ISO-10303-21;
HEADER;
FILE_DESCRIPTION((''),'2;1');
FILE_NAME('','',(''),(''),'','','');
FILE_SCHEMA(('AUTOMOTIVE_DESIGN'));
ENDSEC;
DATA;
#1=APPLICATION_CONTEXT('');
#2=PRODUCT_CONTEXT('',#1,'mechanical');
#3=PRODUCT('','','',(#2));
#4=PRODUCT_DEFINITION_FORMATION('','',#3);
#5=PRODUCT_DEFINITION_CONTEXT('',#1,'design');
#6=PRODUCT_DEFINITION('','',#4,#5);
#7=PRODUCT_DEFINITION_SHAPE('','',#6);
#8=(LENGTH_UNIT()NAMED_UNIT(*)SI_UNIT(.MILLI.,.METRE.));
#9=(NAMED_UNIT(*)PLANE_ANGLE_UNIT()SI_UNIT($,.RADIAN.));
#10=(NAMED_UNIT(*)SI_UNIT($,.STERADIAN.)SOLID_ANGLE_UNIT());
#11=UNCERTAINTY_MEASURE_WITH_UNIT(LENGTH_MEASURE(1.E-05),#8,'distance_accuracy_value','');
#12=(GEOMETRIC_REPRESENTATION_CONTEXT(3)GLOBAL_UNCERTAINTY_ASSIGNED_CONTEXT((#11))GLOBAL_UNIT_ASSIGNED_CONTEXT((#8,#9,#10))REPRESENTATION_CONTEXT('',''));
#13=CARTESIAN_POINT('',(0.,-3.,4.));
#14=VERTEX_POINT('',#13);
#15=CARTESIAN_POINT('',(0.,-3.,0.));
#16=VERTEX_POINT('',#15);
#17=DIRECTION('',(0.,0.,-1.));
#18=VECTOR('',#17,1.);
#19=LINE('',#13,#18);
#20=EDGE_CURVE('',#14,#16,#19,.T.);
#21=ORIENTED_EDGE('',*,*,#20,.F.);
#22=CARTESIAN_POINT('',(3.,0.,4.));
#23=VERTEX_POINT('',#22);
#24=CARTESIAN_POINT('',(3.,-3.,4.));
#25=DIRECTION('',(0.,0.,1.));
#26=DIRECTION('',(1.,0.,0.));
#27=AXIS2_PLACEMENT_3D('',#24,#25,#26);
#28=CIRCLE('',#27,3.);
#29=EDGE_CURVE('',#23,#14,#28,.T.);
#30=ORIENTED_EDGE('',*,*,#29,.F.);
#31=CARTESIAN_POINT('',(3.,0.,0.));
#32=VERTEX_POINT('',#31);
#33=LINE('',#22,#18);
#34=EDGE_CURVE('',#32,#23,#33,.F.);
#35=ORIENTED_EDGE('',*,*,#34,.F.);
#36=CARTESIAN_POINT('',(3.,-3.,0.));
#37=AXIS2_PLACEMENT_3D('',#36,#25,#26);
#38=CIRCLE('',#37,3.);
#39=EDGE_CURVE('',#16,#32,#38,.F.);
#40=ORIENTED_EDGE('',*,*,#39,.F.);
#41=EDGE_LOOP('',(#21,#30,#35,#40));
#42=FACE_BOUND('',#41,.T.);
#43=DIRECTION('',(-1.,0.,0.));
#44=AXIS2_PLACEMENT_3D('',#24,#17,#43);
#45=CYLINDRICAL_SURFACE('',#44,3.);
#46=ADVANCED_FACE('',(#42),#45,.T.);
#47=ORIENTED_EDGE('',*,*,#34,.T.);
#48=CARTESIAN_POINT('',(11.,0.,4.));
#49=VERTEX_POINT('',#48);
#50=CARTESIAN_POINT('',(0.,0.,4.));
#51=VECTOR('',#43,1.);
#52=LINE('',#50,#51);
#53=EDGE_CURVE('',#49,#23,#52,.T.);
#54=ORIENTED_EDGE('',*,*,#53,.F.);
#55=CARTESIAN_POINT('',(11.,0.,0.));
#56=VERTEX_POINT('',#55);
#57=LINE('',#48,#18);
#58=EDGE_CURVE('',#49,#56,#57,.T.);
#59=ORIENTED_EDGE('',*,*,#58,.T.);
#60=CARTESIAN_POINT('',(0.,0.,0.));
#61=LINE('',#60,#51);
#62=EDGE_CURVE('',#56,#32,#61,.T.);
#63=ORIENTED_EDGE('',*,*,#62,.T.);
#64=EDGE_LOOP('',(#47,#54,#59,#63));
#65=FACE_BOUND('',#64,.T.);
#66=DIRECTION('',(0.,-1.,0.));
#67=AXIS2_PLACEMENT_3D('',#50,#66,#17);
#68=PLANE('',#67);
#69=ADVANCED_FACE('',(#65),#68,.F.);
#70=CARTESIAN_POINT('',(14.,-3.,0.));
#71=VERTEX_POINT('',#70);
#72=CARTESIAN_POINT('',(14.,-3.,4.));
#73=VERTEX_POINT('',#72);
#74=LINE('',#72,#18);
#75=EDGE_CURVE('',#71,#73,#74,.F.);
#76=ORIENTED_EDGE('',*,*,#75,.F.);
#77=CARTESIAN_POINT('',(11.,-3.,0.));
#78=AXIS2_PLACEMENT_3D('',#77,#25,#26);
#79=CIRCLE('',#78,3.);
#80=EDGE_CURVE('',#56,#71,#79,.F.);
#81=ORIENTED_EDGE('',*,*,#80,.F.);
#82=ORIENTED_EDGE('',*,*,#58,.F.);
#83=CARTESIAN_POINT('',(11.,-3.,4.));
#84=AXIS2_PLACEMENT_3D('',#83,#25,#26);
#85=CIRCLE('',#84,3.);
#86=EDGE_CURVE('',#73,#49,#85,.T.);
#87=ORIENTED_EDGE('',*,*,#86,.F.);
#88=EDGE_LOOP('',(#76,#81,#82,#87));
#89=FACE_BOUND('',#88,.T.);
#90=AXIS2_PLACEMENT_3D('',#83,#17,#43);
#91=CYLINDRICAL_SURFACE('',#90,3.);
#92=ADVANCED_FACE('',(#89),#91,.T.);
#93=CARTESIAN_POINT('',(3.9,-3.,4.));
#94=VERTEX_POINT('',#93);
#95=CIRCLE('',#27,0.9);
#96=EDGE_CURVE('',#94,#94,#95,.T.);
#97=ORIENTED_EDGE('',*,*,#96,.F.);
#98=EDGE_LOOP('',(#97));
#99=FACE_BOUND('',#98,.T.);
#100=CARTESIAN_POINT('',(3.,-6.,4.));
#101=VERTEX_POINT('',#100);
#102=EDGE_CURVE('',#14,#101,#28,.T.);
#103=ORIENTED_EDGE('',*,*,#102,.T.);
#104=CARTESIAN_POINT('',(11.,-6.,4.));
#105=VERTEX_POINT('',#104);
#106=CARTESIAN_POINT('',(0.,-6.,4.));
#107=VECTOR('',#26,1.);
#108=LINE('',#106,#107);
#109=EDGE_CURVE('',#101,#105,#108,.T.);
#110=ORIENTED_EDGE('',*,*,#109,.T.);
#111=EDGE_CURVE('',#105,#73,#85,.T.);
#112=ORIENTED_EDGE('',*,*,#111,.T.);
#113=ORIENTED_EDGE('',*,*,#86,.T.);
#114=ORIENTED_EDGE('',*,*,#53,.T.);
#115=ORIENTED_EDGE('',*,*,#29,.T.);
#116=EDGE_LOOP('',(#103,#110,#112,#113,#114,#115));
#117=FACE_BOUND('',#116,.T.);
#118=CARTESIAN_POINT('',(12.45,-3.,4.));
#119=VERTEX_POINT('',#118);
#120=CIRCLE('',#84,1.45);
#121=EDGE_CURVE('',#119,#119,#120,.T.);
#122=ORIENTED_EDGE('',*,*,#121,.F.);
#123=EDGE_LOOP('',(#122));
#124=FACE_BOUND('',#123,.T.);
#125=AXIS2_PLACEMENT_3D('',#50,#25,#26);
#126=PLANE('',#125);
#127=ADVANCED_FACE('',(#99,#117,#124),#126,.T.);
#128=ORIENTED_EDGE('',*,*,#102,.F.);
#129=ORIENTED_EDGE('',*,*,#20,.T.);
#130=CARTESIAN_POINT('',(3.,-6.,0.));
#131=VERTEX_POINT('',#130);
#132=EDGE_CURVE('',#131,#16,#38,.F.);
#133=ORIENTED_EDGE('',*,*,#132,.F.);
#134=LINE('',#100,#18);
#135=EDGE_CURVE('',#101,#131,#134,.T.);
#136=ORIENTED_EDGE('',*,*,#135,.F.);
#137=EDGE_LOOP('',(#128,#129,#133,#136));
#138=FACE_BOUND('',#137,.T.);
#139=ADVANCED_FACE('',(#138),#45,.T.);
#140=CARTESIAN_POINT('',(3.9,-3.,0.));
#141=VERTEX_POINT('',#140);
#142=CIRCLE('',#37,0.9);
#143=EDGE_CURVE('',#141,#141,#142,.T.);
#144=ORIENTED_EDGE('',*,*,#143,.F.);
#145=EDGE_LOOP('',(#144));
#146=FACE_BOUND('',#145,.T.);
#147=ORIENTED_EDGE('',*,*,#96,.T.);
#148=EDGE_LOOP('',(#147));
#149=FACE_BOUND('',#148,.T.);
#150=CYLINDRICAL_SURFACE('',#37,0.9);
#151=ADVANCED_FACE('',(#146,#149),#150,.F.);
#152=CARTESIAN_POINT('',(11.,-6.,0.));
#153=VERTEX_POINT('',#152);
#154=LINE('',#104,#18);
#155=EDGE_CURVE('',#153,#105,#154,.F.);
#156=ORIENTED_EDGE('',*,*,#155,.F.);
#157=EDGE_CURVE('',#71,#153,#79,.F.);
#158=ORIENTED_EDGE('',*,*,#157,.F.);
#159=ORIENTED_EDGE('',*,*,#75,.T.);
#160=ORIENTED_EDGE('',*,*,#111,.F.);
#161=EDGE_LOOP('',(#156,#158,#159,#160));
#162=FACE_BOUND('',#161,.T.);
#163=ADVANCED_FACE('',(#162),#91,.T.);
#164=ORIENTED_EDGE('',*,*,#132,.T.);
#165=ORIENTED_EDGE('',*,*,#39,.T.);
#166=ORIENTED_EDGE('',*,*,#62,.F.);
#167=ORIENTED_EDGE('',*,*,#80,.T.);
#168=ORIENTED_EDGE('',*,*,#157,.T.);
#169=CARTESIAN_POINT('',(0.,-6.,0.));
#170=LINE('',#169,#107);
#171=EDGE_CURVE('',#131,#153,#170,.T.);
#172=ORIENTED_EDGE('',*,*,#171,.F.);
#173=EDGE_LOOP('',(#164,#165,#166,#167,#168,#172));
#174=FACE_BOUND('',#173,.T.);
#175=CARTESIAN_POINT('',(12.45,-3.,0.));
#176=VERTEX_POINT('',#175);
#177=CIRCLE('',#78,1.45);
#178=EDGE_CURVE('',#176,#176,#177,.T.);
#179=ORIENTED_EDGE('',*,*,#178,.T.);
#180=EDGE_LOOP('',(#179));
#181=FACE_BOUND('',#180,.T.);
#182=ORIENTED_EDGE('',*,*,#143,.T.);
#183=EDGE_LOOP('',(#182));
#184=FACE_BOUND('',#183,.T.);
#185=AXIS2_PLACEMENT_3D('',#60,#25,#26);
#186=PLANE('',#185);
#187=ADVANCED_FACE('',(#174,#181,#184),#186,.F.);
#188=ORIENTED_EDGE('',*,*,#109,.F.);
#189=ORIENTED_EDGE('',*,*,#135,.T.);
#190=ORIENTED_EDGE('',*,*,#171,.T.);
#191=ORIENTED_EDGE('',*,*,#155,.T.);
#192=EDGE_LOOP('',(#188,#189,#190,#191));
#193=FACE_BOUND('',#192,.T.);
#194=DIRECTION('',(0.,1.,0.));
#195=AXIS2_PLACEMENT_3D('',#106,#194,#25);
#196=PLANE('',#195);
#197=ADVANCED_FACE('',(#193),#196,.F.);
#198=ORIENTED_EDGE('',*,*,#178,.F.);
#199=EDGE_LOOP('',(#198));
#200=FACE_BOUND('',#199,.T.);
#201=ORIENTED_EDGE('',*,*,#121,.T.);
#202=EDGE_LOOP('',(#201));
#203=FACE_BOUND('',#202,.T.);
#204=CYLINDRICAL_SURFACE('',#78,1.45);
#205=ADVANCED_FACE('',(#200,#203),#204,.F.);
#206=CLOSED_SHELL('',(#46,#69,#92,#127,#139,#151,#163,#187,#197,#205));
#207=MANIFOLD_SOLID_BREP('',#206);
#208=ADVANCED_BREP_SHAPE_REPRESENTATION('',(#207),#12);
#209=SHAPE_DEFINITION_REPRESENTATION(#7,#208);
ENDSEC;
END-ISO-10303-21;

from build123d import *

# Parameters (mm, degrees)
SKETCH1_W               = 14
SKETCH1_H               = 6
BOSS_EXTRUDE1_DEPTH     = 4
CUT_EXTRUDE1_DEPTH      = 16.748015748
CUT_EXTRUDE1_DEPTH_BACK = 16.748015748
SKETCH2_R               = 0.9
SKETCH2_R_2             = 1.45
FILLET1_R               = 3


with BuildPart() as part:
    # Sketch1 → Boss-Extrude1 (new body)
    with BuildSketch(Plane.XY):
        with Locations((7, -3)):
            Rectangle(SKETCH1_W, SKETCH1_H)
    extrude(amount=BOSS_EXTRUDE1_DEPTH)

    # Sketch2 → Cut-Extrude1 (cut, two sides: drawn at the far end of the back side and taken through both)
    with BuildSketch(Plane.XY.offset(4).offset(-CUT_EXTRUDE1_DEPTH_BACK)):
        with Locations((3, -3)):
            Circle(SKETCH2_R)
        with Locations((11, -3)):
            Circle(SKETCH2_R_2)
    extrude(amount=CUT_EXTRUDE1_DEPTH + CUT_EXTRUDE1_DEPTH_BACK, mode=Mode.SUBTRACT)

    # Fillet1
    fillet1_edges = [part.edges().sort_by_distance(p)[0] for p in [
        (14, -6, 2),
        (14, 0, 2),
        (0, -6, 2),
        (0, 0, 2),
    ]]
    fillet(fillet1_edges, radius=FILLET1_R - 0.0001)  # a hair under: the kernel refuses the full size


solid = part.part
